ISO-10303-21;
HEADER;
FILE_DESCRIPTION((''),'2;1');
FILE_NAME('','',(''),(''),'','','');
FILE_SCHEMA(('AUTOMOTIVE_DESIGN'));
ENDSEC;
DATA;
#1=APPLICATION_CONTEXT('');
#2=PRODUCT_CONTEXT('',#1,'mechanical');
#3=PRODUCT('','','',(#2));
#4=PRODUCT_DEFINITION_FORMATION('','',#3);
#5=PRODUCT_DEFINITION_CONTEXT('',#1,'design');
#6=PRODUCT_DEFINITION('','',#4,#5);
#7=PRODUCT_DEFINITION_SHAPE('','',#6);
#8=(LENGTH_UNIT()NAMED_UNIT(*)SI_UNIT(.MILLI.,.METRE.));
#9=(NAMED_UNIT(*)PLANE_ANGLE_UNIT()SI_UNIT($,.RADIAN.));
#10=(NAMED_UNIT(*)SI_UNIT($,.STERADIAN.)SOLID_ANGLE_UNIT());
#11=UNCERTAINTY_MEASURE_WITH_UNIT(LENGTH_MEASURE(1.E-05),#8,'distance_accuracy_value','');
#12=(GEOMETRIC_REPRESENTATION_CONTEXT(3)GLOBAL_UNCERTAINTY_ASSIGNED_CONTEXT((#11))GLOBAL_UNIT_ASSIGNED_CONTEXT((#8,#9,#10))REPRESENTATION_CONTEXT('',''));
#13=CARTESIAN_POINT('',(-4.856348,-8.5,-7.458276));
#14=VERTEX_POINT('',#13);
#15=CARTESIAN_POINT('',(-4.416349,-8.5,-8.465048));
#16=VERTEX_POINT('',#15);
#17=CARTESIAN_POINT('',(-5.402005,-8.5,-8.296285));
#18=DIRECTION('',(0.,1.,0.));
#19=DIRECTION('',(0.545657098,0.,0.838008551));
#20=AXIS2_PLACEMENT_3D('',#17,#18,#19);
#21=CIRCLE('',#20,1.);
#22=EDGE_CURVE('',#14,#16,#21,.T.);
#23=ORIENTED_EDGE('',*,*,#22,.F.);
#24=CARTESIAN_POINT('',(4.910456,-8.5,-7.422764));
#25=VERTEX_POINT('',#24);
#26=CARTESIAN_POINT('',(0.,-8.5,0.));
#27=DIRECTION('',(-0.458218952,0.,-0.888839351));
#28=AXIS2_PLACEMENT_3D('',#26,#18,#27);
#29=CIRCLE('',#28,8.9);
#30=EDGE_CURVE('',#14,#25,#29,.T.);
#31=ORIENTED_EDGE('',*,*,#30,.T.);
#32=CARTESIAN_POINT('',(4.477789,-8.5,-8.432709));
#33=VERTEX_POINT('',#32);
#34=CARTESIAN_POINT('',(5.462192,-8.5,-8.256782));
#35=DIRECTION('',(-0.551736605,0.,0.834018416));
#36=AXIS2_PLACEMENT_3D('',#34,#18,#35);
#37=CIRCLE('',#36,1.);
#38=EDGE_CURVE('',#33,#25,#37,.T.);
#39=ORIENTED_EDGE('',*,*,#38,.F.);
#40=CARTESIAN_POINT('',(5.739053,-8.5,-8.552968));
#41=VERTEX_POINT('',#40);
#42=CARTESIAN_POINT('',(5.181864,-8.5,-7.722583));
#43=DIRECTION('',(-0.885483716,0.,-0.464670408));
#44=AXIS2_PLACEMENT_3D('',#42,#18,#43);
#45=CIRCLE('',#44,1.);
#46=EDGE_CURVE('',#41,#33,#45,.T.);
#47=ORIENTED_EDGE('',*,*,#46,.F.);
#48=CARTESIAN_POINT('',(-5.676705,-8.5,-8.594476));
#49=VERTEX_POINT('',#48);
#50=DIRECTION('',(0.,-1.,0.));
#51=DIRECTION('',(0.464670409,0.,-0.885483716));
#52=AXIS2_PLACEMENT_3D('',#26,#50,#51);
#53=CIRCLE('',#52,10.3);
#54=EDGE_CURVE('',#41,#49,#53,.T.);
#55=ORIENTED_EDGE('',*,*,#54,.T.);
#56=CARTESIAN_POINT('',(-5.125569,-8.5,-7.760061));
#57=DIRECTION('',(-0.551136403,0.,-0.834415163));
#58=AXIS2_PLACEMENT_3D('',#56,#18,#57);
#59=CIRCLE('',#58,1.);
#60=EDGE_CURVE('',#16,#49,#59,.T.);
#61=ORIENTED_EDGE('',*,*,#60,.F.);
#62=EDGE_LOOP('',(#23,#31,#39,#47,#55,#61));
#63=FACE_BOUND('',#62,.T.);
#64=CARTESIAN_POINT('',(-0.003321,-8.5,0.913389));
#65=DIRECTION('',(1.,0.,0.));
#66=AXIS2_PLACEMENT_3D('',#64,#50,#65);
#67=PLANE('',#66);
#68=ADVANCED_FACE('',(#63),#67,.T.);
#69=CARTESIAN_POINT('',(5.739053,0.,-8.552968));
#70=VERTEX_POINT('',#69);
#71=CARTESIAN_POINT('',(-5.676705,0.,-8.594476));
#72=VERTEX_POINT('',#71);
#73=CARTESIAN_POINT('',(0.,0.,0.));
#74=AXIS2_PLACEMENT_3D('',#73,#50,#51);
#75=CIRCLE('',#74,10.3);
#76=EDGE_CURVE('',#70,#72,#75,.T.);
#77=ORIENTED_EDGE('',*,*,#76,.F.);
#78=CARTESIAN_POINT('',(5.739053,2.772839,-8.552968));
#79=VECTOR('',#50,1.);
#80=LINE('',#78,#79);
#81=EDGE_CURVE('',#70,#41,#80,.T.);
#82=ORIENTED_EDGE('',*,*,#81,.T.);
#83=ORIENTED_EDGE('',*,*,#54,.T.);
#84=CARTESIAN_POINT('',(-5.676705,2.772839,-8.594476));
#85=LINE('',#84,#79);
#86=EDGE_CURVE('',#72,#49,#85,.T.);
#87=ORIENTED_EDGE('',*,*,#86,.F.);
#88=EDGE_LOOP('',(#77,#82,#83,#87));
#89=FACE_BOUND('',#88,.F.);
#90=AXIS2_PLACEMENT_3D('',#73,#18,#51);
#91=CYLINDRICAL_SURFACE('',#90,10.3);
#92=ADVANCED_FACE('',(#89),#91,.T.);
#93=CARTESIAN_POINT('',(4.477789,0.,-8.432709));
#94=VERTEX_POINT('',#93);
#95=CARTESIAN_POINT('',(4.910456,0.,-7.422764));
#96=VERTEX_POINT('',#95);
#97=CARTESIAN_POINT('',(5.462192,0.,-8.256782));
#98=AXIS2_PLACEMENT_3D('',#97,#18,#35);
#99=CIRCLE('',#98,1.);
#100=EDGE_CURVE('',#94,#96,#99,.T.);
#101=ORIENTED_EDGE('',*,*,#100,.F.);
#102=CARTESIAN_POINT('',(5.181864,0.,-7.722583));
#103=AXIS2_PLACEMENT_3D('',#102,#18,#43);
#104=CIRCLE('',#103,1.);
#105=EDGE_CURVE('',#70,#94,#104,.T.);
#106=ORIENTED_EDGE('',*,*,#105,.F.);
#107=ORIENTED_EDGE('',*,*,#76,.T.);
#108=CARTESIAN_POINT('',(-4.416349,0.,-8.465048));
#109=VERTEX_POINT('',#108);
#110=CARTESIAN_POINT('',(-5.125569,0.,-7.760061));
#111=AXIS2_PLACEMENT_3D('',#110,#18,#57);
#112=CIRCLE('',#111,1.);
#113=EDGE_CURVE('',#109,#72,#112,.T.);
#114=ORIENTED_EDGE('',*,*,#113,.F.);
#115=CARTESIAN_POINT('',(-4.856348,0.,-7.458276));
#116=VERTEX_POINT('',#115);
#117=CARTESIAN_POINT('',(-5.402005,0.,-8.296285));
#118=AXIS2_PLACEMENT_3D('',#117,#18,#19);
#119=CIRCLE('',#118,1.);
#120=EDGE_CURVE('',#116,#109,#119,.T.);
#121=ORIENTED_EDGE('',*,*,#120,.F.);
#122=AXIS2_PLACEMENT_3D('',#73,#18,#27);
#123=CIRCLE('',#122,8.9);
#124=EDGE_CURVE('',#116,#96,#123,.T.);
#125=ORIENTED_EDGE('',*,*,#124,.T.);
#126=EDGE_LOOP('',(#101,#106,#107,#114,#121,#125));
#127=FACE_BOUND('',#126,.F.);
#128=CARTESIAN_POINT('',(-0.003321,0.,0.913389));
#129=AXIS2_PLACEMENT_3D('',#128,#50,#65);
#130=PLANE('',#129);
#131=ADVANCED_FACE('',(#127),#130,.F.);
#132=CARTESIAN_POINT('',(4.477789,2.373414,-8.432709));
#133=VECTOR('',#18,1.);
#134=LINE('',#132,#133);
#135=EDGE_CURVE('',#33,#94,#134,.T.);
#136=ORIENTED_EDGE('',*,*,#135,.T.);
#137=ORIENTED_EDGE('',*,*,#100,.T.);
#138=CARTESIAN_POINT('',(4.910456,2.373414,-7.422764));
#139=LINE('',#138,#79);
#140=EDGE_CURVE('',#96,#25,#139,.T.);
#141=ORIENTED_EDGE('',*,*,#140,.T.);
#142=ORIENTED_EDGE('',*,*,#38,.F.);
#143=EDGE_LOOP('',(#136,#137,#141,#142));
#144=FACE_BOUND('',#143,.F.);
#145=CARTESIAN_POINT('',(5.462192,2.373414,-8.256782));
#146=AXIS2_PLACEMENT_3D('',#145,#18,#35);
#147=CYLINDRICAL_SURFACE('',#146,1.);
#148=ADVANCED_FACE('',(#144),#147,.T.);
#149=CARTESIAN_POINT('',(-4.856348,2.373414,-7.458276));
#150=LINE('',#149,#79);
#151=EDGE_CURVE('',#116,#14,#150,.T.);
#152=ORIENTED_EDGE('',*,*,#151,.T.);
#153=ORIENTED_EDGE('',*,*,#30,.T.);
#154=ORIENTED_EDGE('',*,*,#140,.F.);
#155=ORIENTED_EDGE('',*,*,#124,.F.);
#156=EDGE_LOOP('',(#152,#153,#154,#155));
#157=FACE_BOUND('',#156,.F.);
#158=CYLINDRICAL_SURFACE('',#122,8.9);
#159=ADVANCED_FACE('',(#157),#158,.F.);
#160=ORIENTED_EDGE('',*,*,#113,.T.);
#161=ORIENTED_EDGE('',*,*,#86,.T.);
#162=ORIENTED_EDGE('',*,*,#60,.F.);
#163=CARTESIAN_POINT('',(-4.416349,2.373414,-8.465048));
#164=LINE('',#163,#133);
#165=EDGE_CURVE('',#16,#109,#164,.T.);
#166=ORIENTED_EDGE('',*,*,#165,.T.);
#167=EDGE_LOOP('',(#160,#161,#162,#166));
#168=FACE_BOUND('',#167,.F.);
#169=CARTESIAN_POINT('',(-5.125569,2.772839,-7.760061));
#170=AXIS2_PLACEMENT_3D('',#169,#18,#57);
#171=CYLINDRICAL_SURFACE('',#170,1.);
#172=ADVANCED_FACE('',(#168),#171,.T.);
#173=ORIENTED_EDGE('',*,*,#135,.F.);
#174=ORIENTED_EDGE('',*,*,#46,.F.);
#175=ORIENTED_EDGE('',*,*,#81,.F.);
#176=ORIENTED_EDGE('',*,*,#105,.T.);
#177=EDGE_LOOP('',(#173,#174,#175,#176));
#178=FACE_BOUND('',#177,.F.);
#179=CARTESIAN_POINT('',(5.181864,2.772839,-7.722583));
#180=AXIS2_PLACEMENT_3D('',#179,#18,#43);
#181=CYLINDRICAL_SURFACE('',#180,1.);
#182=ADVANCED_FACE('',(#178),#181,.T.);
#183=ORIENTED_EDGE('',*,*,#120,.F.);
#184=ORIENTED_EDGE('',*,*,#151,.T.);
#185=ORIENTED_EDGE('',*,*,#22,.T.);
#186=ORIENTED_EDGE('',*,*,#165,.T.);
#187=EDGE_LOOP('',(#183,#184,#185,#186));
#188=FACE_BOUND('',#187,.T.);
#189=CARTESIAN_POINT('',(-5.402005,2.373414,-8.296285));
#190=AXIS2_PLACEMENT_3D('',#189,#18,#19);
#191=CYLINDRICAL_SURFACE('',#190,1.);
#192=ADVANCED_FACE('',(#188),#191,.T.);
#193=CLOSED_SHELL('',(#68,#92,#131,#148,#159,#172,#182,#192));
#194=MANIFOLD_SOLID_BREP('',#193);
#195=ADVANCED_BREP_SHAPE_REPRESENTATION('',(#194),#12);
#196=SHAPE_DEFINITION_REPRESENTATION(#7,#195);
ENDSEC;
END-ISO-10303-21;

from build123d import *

# Parameters (mm, degrees)
F1_DEPTH    = 8.5
F2_T1_DEPTH = 13.246827309
F2_T3_DEPTH = 14.0456784574


# Not quite as in the source:
# - a fillet or chamfer that OpenCascade refuses, or shapes differently, is made with other operations: its cross-section is extruded or revolved along the edge and cut away or added


with BuildPart() as f1:
    # F0 (on Front) → F1 (new body)
    with BuildSketch(Plane.XZ):
        with BuildLine():
            ThreePointArc((-4.0781486701, -7.910670226), (-0.0323602773, 8.899941169), (4.1355666361, -7.880805073))
            Line((4.1355666361, -7.880805073), (4.7861052081, -9.1204822755))
            ThreePointArc((4.7861052081, -9.1204822755), (-0.037450658, 10.2999319147), (-4.7196552025, -9.1550453177))
            Line((-4.7196552025, -9.1550453177), (-4.0781486701, -7.910670226))
        make_face()
    extrude(amount=F1_DEPTH)

    # F2: fillet of radius 1 on 4 edges, made by hand

    # F2_s2 → F2_t1 (cut)
    with BuildSketch(Plane.XZ.offset(-2.3734136545)):
        with BuildLine():
            ThreePointArc((-4.8563481702, -7.4582761044), (-4.4353117021, -8.0403480428), (-4.5131659168, -8.7545036072))
            Line((-4.5131659168, -8.7545036072), (-4.0781486701, -7.910670226))
            ThreePointArc((-4.0781486701, -7.910670226), (-4.4729714461, -7.6943178023), (-4.8563481702, -7.4582761044))
        make_face()
        with BuildLine():
            ThreePointArc((4.9104557842, -7.4227639051), (4.4936632318, -8.0078821984), (4.5767086731, -8.72145273))
            Line((4.5767086731, -8.72145273), (4.1355666361, -7.880805073))
            ThreePointArc((4.1355666361, -7.880805073), (4.5288056742, -7.6615872484), (4.9104557842, -7.4227639051))
        make_face()
    extrude(amount=F2_T1_DEPTH, mode=Mode.SUBTRACT)

    # F2_s4 → F2_t3 (cut)
    with BuildSketch(Plane.XZ.offset(-2.7728392287)):
        with BuildLine():
            ThreePointArc((4.2963798875, -8.1872534993), (4.9361379588, -8.6919225089), (5.7390532384, -8.5529683693))
            ThreePointArc((5.7390532384, -8.5529683693), (5.2702237229, -8.849561679), (4.7861052081, -9.1204822755))
            Line((4.7861052081, -9.1204822755), (4.2963798875, -8.1872534993))
        make_face()
        with BuildLine():
            ThreePointArc((-5.6767049543, -8.5944761831), (-4.8728004404, -8.7275879094), (-4.2367291997, -8.2182799714))
            Line((-4.2367291997, -8.2182799714), (-4.7196552025, -9.1550453177))
            ThreePointArc((-4.7196552025, -9.1550453177), (-5.2057310309, -8.8876523579), (-5.6767049543, -8.5944761831))
        make_face()
    extrude(amount=F2_T3_DEPTH, mode=Mode.SUBTRACT)


solid = f1.part
